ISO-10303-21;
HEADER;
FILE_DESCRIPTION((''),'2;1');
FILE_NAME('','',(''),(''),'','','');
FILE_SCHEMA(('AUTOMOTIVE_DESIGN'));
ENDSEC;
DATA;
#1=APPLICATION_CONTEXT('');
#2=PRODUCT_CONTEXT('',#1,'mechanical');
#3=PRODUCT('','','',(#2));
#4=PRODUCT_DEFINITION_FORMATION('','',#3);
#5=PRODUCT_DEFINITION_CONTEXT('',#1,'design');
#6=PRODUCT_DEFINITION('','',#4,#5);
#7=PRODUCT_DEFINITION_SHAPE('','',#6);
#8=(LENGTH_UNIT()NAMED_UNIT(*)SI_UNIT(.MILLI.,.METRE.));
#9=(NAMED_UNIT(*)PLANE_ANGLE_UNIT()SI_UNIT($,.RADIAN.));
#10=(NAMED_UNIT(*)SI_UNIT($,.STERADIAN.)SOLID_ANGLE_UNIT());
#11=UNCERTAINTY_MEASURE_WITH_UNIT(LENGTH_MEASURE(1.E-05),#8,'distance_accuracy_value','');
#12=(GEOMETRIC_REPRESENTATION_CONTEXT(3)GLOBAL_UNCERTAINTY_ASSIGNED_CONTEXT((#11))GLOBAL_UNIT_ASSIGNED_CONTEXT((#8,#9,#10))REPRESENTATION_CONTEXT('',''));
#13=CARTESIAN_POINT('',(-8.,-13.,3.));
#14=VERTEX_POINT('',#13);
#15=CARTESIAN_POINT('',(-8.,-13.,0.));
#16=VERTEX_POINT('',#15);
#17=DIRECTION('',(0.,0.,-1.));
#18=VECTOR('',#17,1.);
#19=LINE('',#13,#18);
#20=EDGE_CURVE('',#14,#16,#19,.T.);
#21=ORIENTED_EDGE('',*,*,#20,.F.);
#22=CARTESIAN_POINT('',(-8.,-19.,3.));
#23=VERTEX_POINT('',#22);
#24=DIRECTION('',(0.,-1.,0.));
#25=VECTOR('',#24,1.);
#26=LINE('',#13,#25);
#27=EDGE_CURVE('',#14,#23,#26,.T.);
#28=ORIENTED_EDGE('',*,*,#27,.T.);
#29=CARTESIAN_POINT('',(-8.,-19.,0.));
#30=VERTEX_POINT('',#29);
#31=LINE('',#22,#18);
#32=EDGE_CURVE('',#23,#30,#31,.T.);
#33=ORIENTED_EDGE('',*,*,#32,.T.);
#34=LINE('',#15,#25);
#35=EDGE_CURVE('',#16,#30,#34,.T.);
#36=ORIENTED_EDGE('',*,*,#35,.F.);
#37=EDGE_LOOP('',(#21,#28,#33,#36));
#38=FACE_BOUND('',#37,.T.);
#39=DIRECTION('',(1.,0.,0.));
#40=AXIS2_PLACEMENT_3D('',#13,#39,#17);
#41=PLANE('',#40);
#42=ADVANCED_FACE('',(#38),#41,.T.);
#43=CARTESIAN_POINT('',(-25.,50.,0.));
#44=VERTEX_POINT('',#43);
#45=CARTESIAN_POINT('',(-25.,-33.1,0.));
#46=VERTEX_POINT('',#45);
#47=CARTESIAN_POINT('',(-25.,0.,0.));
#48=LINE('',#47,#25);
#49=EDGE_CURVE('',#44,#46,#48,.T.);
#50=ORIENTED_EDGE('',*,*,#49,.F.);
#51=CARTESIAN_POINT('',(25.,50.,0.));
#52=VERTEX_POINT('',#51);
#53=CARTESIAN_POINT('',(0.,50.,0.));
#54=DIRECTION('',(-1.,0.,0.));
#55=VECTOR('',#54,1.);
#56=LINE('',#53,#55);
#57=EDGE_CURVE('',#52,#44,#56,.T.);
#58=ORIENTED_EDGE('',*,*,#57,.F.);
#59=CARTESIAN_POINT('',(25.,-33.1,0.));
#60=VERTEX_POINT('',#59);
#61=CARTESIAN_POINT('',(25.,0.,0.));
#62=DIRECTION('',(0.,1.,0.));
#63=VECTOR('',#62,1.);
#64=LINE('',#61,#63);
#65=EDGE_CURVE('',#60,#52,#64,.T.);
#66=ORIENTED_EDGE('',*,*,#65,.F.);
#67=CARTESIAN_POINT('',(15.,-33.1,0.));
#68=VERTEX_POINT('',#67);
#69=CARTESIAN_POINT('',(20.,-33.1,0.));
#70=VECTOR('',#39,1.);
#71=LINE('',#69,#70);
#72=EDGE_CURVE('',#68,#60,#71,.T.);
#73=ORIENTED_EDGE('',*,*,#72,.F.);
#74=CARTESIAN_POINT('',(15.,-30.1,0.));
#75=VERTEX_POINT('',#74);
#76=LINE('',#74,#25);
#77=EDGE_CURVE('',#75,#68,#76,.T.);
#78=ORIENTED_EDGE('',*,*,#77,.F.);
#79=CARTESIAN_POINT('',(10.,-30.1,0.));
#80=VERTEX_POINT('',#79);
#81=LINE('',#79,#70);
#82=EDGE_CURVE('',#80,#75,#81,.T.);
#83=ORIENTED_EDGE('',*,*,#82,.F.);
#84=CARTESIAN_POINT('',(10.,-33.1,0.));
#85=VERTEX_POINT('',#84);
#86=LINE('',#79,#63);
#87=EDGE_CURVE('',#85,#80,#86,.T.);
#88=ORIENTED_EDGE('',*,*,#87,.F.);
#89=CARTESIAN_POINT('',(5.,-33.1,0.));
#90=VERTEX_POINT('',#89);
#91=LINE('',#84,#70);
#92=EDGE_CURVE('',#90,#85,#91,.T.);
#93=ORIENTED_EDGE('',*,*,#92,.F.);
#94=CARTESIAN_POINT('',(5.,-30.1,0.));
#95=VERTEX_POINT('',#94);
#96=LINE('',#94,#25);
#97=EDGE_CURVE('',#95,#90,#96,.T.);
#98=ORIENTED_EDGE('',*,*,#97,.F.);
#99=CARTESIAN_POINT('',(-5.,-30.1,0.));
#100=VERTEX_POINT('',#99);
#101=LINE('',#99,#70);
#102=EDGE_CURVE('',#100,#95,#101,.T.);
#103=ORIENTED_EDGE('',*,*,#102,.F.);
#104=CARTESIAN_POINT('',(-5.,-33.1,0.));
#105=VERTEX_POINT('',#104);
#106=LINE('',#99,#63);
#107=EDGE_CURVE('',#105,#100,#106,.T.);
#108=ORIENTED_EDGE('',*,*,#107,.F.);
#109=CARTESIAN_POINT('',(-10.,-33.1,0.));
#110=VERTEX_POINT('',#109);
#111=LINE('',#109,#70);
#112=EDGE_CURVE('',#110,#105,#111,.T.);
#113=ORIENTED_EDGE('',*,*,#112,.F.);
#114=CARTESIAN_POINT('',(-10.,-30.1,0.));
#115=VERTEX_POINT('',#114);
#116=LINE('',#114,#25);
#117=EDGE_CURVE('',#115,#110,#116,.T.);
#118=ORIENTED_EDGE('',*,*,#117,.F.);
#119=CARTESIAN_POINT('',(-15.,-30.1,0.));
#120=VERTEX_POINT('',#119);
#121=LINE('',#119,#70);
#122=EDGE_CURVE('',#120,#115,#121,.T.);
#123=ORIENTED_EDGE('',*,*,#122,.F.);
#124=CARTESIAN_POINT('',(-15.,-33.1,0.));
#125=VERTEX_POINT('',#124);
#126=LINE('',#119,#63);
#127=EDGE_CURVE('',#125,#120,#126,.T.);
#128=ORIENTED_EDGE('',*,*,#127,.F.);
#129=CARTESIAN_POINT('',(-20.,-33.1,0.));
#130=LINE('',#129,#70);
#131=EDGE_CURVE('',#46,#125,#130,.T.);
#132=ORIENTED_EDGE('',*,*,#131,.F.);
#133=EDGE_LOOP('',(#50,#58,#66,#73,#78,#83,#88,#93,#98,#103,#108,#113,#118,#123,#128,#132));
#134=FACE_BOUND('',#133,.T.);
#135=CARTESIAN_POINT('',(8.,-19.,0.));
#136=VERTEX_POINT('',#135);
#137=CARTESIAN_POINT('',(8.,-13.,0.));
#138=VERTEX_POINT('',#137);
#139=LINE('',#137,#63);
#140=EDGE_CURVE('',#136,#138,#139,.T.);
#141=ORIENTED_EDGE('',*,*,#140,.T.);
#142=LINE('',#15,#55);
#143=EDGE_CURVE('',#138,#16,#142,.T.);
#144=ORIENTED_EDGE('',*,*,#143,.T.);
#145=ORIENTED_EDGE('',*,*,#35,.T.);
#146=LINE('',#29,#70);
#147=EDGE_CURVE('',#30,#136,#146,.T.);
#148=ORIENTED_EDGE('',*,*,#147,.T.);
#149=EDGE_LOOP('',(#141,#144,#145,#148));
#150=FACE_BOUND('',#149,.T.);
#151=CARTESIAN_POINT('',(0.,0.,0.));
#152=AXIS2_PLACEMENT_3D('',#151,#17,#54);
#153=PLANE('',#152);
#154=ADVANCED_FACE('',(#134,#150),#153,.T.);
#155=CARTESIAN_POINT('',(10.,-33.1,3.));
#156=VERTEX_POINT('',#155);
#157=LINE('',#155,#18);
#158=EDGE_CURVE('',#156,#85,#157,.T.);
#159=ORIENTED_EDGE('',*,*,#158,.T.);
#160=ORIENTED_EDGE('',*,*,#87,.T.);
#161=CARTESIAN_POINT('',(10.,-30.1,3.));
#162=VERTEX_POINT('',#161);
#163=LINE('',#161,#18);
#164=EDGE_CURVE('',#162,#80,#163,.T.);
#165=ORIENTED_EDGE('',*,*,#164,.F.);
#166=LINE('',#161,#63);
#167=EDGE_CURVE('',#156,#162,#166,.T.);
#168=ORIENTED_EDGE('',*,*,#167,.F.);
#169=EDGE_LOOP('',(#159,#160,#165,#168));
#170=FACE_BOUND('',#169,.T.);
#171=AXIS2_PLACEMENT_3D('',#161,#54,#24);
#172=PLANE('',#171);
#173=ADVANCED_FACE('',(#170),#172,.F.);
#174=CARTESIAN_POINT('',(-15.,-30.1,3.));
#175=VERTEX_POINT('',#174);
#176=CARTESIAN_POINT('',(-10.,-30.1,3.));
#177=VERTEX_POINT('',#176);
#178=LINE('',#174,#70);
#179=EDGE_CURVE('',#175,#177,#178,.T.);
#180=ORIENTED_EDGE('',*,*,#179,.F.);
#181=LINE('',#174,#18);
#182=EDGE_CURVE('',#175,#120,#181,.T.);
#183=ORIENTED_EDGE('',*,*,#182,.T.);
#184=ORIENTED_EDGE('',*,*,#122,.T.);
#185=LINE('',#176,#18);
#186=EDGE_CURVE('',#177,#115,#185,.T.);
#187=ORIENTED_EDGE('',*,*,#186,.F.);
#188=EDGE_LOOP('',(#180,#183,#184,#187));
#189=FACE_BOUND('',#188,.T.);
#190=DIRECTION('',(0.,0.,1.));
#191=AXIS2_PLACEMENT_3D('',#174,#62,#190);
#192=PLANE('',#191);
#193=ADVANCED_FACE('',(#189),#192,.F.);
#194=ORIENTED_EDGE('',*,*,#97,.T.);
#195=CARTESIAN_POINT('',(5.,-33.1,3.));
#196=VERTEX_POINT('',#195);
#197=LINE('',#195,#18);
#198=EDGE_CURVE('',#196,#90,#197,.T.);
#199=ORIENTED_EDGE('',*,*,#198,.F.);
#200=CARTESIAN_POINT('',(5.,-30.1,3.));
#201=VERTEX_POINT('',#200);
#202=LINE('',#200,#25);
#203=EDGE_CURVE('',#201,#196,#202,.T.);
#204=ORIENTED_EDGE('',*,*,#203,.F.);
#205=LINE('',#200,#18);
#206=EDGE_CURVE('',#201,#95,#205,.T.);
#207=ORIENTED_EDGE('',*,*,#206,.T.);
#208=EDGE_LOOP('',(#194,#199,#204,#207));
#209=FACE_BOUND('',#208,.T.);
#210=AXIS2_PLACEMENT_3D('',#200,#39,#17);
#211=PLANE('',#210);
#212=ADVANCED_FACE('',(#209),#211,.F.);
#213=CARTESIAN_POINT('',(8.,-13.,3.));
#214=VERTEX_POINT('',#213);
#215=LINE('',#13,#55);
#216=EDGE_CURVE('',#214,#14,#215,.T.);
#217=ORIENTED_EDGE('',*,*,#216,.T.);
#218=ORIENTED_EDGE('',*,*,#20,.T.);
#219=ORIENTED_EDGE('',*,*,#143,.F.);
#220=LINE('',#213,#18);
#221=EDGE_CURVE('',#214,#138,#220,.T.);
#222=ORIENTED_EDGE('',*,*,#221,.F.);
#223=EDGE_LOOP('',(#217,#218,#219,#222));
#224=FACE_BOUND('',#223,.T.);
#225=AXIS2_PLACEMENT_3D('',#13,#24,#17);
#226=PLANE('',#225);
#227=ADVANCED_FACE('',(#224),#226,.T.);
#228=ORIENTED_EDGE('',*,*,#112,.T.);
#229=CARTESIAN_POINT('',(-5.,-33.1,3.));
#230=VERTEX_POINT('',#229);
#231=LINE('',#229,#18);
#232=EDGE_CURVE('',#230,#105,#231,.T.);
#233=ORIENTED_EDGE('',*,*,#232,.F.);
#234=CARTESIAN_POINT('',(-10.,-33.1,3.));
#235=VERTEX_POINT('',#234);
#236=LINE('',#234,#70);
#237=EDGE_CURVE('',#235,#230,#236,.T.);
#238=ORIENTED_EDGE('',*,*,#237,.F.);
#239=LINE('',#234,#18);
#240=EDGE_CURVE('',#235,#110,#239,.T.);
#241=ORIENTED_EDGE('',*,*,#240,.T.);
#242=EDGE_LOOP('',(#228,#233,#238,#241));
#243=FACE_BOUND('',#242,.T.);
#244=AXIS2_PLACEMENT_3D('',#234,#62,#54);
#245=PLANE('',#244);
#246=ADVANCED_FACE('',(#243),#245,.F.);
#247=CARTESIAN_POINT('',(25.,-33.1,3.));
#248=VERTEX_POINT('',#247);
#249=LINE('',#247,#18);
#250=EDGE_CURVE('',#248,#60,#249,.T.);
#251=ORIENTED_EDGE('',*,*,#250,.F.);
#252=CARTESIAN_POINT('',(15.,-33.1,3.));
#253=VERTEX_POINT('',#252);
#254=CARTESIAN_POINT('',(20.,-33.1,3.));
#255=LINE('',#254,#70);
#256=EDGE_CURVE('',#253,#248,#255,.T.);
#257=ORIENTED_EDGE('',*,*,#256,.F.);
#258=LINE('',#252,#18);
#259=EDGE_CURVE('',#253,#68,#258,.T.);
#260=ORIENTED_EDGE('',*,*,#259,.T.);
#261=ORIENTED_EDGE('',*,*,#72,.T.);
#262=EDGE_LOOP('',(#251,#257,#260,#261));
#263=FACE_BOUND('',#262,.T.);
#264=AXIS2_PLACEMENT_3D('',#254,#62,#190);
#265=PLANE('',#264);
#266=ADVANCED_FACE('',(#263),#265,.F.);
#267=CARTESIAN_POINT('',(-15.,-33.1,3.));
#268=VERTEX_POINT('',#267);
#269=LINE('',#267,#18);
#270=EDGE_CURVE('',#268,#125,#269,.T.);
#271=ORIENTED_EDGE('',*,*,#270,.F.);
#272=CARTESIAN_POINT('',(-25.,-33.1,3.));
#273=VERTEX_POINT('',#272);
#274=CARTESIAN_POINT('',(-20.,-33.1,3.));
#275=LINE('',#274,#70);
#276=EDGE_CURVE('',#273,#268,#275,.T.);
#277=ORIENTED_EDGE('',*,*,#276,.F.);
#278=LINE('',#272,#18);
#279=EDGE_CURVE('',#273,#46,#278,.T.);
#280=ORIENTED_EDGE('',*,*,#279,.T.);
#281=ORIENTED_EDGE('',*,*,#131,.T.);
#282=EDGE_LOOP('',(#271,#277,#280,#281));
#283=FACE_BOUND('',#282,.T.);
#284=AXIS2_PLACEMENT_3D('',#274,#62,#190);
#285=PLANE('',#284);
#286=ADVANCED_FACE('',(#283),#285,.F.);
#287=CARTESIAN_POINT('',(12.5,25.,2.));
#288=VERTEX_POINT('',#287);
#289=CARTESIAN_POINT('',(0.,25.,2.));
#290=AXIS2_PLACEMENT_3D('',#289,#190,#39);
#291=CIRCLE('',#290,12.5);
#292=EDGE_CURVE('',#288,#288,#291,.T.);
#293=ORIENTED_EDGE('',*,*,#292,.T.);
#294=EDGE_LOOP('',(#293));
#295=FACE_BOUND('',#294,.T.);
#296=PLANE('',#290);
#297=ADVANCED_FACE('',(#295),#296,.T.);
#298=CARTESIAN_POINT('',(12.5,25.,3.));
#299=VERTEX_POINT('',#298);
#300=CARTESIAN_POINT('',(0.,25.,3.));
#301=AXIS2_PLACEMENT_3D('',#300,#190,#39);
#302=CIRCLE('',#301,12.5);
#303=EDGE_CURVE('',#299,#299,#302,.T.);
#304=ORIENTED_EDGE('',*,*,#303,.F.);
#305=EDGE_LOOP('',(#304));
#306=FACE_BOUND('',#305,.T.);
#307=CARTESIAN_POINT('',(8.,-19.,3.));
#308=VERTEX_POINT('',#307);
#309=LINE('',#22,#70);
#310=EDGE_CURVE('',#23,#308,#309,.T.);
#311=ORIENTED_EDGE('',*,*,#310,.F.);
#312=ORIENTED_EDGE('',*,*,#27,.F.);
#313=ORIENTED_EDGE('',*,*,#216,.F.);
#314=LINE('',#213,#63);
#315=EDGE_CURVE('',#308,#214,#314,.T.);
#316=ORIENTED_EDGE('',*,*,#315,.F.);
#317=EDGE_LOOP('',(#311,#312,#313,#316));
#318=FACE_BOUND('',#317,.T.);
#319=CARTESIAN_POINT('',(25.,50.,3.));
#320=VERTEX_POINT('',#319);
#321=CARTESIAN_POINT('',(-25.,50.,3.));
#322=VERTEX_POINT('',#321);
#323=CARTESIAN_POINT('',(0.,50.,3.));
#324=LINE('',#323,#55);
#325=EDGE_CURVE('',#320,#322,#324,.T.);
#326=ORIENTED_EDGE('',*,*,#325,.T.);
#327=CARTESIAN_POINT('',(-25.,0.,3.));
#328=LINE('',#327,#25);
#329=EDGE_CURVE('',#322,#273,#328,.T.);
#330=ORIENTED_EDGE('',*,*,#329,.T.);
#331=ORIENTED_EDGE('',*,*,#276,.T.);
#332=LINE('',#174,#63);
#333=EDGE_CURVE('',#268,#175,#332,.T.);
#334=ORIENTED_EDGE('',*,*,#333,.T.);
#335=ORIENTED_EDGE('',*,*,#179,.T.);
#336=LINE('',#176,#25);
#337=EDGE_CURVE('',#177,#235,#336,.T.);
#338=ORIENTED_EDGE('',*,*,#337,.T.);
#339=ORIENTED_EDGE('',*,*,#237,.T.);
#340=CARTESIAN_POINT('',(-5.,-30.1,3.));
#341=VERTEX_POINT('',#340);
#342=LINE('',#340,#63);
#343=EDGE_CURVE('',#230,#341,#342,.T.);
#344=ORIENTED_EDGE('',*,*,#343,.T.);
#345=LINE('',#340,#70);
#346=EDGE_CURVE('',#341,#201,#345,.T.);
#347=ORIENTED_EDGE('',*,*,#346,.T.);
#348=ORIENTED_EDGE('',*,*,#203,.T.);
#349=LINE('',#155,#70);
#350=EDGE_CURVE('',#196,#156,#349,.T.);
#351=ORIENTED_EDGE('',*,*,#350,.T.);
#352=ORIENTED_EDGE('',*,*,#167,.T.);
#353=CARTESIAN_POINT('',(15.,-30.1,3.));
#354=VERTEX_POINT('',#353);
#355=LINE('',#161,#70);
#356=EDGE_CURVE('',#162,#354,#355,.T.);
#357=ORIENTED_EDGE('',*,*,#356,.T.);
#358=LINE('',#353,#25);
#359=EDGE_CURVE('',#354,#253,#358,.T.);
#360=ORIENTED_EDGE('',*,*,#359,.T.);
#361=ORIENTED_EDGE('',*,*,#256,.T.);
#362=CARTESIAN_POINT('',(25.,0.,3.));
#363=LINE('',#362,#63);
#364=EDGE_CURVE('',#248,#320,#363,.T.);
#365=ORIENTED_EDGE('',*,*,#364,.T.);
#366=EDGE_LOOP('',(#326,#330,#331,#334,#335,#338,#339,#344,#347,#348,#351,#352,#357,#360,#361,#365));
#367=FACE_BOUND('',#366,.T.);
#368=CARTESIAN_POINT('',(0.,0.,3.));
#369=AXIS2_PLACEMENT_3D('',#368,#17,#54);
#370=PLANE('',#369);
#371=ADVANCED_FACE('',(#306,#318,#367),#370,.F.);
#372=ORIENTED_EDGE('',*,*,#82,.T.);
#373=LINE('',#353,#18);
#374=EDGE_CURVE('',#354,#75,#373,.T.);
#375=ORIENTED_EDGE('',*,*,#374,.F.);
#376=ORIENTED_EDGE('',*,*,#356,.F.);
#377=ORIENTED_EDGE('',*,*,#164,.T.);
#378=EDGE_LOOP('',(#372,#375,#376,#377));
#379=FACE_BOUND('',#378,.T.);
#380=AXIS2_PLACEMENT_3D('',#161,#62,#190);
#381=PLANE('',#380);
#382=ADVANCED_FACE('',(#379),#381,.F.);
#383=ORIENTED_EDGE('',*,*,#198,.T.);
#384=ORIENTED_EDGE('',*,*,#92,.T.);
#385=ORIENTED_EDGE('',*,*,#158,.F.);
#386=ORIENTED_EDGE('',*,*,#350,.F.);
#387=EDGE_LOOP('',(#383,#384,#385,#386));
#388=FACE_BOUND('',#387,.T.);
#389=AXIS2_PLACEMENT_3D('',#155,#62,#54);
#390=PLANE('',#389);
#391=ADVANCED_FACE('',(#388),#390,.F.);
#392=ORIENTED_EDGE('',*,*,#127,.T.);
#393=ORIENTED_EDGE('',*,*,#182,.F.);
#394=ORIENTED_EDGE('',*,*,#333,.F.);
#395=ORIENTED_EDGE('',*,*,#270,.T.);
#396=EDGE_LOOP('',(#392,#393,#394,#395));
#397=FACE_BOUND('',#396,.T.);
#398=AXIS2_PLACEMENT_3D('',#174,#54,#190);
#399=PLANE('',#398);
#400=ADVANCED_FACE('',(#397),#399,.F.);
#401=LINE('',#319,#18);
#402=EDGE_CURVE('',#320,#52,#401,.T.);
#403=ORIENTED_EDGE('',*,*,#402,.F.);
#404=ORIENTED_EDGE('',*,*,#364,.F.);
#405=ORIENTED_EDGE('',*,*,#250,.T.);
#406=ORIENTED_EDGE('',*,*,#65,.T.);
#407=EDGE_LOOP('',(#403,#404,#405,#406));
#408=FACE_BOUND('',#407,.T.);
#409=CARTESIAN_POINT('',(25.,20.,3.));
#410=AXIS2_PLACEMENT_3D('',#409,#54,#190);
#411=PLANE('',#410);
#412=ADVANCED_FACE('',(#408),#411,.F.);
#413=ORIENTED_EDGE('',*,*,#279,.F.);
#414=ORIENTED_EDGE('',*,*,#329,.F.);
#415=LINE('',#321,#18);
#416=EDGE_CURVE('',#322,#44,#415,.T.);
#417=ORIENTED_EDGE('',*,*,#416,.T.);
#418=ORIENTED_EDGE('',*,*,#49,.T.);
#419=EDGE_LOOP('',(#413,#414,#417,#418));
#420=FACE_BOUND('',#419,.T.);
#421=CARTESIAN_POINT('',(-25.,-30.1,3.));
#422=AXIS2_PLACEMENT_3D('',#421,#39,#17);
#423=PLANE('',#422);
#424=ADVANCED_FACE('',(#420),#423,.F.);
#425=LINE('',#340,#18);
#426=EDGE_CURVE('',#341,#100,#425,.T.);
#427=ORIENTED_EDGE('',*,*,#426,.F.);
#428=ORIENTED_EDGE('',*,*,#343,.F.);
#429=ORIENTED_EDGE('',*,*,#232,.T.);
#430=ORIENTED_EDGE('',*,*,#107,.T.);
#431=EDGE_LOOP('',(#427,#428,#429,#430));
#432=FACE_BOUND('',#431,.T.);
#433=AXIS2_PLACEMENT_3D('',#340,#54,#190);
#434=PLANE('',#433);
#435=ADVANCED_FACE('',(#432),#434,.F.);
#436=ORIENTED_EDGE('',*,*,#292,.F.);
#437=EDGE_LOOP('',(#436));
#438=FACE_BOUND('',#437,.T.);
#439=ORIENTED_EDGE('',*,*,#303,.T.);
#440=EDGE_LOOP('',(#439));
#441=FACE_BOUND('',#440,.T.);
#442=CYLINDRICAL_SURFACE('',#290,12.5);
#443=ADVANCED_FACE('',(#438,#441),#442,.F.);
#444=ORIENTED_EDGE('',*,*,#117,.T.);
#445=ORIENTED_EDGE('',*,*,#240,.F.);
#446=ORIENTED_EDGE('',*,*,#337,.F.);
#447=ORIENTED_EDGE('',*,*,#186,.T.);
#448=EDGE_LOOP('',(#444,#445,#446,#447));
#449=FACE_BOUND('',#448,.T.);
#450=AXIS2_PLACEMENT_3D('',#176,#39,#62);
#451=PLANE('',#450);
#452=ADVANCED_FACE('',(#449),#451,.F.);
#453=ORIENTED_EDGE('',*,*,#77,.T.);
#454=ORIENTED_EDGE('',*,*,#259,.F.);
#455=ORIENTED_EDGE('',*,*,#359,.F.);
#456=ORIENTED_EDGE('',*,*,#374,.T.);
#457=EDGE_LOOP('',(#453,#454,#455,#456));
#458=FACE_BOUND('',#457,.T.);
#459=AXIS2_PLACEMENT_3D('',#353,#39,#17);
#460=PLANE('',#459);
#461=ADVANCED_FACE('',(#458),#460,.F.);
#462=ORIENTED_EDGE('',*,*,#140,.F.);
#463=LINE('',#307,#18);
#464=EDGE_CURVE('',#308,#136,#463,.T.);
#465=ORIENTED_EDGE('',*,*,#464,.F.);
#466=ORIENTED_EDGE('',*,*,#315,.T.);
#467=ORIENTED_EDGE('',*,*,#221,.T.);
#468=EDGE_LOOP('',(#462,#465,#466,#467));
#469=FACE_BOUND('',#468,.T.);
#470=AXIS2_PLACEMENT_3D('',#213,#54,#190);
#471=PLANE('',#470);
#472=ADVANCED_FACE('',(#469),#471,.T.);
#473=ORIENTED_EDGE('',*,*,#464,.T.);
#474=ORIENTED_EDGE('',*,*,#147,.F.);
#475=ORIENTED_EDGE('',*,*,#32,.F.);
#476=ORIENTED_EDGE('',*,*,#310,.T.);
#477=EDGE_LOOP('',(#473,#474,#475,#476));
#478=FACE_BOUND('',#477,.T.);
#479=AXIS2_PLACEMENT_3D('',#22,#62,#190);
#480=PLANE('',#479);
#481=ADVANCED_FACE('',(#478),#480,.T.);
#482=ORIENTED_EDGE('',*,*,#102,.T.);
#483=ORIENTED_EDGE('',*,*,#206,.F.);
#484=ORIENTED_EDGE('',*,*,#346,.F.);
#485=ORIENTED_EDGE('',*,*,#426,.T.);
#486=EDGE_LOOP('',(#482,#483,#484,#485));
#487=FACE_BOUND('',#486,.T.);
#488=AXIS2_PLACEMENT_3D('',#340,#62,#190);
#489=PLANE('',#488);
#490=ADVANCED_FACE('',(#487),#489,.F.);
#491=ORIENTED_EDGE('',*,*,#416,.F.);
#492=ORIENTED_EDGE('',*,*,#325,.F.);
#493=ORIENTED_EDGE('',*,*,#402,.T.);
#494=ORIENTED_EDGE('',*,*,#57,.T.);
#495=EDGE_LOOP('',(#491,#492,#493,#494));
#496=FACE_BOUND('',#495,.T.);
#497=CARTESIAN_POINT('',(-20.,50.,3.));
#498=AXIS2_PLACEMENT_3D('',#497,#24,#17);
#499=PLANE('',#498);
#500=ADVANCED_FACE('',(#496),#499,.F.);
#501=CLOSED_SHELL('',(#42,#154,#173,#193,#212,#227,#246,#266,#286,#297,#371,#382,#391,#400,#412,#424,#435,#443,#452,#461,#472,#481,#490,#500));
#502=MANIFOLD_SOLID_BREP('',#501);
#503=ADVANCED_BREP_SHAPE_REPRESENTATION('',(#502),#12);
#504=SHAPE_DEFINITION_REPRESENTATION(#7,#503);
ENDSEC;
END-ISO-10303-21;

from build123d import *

# Parameters (mm, degrees)
SKETCH1_W            = 16
SKETCH1_H            = 6
BOSS_EXTRUDE1_DEPTH  = 3
MOVE_FACE1_OUTLINE_W = 5
MOVE_FACE1_OUTLINE_H = 53.1
MOVE_FACE1_DEPTH     = 3
MOVE_FACE2_BY        = 30
SKETCH2_R            = 12.5
CUT_EXTRUDE1_DEPTH   = 1


# Read off the part's stored shape, not the designer's step: Move Face1
with BuildPart() as part:
    # Sketch1 → Boss-Extrude1 (new body)
    with BuildSketch(Plane.XY):
        Polygon((-20, 20), (-20, -30.1), (-20, -33.1), (-15, -33.1), (-15, -30.1), (-10, -30.1), (-10, -33.1), (-5, -33.1), (-5, -30.1), (5, -30.1), (5, -33.1), (10, -33.1), (10, -30.1), (15, -30.1), (15, -33.1), (20, -33.1), (20, -30.1), (20, 20), align=None)
        with Locations((0, -16)):
            Rectangle(SKETCH1_W, SKETCH1_H, mode=Mode.SUBTRACT)
    extrude(amount=BOSS_EXTRUDE1_DEPTH)

    # Move Face1 outline → Move Face1 (add)
    with BuildSketch(Plane.XY):
        with Locations((22.5, -6.55)):
            Rectangle(MOVE_FACE1_OUTLINE_W, MOVE_FACE1_OUTLINE_H)
        with Locations((-22.5, -6.55)):
            Rectangle(MOVE_FACE1_OUTLINE_W, MOVE_FACE1_OUTLINE_H)
    extrude(amount=MOVE_FACE1_DEPTH)

    # Move Face2: a face moved outward by 30.0
    extrude(part.faces().sort_by_distance((0, 20, 1.5))[0], amount=MOVE_FACE2_BY, dir=(0, 1, 0))

    # Sketch2 → Cut-Extrude1 (cut)
    with BuildSketch(Plane.XY.offset(3)):
        with Locations((0, 25)):
            Circle(SKETCH2_R)
    extrude(amount=-CUT_EXTRUDE1_DEPTH, mode=Mode.SUBTRACT)


solid = part.part
